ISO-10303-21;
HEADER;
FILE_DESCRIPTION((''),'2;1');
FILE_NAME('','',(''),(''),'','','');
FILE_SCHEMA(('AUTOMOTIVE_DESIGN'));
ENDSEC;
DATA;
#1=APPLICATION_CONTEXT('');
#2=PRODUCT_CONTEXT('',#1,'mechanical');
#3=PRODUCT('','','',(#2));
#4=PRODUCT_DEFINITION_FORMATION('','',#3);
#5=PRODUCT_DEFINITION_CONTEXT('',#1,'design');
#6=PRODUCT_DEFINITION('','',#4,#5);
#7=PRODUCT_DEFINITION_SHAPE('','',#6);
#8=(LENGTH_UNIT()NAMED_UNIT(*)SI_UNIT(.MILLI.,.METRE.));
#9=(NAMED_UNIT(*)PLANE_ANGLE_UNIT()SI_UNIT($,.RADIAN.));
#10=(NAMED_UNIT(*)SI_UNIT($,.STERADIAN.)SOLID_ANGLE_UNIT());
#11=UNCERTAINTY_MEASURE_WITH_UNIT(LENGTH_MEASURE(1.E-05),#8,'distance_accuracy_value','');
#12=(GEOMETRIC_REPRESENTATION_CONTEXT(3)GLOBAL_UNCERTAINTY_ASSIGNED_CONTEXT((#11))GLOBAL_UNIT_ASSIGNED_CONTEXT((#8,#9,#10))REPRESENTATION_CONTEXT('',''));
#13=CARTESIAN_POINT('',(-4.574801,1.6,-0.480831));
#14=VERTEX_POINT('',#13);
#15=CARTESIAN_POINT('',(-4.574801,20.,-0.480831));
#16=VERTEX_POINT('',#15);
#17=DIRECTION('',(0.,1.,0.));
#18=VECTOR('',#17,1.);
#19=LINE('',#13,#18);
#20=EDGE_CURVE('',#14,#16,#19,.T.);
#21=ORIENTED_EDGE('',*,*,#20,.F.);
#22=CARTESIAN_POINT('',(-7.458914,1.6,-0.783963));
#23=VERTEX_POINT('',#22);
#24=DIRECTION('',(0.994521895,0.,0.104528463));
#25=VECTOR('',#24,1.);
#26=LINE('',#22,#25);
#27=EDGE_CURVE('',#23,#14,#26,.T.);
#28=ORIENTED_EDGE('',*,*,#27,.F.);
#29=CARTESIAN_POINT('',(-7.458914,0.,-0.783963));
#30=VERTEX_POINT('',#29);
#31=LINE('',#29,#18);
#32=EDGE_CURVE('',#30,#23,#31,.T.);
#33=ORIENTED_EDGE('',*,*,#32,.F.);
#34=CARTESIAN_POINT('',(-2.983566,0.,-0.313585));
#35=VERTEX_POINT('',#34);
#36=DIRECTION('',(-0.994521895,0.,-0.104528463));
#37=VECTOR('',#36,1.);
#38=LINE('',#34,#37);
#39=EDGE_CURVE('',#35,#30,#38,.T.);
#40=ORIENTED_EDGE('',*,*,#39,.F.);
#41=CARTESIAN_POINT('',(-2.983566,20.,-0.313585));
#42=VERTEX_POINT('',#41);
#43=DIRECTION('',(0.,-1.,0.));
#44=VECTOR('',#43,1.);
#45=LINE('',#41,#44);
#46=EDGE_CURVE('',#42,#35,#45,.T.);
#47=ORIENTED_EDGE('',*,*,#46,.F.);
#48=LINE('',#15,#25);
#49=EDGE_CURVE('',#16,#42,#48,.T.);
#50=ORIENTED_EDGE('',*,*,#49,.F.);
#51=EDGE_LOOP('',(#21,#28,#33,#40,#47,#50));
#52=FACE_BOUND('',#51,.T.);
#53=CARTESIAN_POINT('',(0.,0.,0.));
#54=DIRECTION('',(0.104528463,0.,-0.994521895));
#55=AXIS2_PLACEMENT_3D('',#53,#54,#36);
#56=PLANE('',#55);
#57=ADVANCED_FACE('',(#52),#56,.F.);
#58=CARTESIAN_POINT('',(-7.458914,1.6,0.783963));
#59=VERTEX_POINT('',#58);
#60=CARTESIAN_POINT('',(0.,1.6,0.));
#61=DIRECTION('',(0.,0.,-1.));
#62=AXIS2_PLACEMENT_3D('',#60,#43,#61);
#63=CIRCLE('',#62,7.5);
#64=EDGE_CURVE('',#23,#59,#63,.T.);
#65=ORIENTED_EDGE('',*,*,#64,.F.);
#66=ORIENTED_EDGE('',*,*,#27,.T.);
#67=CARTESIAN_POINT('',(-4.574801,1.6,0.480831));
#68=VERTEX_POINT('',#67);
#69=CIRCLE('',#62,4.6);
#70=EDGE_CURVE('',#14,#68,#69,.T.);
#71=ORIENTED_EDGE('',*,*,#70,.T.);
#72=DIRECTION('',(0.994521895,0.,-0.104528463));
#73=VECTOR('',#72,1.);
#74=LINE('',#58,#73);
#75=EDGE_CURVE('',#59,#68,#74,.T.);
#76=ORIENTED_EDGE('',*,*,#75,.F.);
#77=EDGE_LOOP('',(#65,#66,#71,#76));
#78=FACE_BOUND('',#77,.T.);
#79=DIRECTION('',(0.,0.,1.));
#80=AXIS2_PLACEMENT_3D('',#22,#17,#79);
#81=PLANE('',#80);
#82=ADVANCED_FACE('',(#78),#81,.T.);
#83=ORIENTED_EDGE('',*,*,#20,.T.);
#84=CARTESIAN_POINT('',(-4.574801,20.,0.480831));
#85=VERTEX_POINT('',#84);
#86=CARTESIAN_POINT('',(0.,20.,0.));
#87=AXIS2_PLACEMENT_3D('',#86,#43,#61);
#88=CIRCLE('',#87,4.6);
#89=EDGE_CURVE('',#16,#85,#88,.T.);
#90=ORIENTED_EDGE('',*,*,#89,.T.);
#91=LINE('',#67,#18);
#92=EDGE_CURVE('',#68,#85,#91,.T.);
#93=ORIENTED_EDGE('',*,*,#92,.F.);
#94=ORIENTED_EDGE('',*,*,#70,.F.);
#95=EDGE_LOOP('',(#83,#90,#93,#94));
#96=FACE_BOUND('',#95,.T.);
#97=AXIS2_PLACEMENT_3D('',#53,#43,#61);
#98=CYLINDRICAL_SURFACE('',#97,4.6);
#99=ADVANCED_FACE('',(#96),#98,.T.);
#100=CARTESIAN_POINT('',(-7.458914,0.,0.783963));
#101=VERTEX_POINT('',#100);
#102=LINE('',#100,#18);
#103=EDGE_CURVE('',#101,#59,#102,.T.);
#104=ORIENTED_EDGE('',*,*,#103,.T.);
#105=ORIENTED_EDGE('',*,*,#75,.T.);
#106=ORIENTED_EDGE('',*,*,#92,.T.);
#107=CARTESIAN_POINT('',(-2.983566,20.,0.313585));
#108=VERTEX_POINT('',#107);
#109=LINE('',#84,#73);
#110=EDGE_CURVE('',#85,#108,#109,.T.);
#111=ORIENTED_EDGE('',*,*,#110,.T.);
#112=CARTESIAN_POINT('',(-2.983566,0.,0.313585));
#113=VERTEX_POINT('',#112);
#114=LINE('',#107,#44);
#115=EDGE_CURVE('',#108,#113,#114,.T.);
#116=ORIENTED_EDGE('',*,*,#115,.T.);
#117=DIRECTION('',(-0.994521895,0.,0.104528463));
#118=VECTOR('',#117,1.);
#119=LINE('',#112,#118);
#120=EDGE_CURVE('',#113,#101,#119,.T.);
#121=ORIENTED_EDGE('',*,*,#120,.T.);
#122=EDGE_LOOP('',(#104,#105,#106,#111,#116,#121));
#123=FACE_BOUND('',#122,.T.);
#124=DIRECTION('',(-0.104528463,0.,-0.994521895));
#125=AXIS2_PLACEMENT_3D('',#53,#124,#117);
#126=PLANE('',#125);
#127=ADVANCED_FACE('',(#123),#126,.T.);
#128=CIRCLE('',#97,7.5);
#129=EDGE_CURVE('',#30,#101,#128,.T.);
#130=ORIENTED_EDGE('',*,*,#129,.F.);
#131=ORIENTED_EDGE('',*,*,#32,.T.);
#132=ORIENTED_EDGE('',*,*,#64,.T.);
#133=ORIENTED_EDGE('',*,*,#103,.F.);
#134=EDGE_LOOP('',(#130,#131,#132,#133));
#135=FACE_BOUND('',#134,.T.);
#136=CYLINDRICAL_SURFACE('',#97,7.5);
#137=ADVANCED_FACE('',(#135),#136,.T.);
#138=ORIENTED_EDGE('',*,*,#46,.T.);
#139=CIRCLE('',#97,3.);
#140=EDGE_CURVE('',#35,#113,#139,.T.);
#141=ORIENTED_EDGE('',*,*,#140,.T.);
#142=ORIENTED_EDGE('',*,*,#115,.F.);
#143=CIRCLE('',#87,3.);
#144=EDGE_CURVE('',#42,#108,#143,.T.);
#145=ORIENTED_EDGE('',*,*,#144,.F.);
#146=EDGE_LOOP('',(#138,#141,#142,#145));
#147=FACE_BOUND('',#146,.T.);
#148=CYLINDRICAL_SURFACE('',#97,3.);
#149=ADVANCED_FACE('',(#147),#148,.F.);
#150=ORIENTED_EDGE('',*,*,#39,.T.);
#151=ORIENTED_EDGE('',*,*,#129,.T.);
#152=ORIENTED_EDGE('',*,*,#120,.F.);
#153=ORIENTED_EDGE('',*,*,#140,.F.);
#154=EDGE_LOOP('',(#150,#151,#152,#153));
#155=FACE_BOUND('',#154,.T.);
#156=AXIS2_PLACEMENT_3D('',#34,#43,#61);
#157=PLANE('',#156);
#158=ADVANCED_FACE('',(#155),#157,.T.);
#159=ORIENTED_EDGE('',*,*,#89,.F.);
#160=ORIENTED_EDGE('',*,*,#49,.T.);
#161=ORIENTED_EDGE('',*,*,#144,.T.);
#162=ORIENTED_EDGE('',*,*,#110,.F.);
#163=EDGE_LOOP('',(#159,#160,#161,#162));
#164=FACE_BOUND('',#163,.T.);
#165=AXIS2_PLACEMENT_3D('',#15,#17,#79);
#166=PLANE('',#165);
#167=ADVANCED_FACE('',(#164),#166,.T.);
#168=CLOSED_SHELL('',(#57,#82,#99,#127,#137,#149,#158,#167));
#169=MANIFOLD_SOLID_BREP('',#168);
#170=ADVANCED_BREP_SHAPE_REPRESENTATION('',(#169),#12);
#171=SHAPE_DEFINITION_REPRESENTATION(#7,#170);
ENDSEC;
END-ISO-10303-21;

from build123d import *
from build123d.topology import SkipClean

# Parameters (mm, degrees)
REVOLVE1_ANGLE = 348


with BuildPart() as part:
    # Sketch1 → Revolve1 (revolve, symmetric)
    with SkipClean():  # the faces are left unmerged after this step: merging them gives an invalid solid
        with BuildSketch(Plane.XY) as revolve1_sk:
            Polygon((3, 20), (3, 0), (7.5, 0), (7.5, 1.6), (4.6, 1.6), (4.6, 20), align=None)
        revolve(axis=Axis((0, 0, 0), (0, 1, 0)), revolution_arc=REVOLVE1_ANGLE / 2)
        revolve(revolve1_sk.sketch, axis=Axis((0, 0, 0), (0, -1, 0)), revolution_arc=REVOLVE1_ANGLE / 2)
    add(part.part.scale(1), mode=Mode.REPLACE)  # the faces are merged on a copy


solid = part.part
